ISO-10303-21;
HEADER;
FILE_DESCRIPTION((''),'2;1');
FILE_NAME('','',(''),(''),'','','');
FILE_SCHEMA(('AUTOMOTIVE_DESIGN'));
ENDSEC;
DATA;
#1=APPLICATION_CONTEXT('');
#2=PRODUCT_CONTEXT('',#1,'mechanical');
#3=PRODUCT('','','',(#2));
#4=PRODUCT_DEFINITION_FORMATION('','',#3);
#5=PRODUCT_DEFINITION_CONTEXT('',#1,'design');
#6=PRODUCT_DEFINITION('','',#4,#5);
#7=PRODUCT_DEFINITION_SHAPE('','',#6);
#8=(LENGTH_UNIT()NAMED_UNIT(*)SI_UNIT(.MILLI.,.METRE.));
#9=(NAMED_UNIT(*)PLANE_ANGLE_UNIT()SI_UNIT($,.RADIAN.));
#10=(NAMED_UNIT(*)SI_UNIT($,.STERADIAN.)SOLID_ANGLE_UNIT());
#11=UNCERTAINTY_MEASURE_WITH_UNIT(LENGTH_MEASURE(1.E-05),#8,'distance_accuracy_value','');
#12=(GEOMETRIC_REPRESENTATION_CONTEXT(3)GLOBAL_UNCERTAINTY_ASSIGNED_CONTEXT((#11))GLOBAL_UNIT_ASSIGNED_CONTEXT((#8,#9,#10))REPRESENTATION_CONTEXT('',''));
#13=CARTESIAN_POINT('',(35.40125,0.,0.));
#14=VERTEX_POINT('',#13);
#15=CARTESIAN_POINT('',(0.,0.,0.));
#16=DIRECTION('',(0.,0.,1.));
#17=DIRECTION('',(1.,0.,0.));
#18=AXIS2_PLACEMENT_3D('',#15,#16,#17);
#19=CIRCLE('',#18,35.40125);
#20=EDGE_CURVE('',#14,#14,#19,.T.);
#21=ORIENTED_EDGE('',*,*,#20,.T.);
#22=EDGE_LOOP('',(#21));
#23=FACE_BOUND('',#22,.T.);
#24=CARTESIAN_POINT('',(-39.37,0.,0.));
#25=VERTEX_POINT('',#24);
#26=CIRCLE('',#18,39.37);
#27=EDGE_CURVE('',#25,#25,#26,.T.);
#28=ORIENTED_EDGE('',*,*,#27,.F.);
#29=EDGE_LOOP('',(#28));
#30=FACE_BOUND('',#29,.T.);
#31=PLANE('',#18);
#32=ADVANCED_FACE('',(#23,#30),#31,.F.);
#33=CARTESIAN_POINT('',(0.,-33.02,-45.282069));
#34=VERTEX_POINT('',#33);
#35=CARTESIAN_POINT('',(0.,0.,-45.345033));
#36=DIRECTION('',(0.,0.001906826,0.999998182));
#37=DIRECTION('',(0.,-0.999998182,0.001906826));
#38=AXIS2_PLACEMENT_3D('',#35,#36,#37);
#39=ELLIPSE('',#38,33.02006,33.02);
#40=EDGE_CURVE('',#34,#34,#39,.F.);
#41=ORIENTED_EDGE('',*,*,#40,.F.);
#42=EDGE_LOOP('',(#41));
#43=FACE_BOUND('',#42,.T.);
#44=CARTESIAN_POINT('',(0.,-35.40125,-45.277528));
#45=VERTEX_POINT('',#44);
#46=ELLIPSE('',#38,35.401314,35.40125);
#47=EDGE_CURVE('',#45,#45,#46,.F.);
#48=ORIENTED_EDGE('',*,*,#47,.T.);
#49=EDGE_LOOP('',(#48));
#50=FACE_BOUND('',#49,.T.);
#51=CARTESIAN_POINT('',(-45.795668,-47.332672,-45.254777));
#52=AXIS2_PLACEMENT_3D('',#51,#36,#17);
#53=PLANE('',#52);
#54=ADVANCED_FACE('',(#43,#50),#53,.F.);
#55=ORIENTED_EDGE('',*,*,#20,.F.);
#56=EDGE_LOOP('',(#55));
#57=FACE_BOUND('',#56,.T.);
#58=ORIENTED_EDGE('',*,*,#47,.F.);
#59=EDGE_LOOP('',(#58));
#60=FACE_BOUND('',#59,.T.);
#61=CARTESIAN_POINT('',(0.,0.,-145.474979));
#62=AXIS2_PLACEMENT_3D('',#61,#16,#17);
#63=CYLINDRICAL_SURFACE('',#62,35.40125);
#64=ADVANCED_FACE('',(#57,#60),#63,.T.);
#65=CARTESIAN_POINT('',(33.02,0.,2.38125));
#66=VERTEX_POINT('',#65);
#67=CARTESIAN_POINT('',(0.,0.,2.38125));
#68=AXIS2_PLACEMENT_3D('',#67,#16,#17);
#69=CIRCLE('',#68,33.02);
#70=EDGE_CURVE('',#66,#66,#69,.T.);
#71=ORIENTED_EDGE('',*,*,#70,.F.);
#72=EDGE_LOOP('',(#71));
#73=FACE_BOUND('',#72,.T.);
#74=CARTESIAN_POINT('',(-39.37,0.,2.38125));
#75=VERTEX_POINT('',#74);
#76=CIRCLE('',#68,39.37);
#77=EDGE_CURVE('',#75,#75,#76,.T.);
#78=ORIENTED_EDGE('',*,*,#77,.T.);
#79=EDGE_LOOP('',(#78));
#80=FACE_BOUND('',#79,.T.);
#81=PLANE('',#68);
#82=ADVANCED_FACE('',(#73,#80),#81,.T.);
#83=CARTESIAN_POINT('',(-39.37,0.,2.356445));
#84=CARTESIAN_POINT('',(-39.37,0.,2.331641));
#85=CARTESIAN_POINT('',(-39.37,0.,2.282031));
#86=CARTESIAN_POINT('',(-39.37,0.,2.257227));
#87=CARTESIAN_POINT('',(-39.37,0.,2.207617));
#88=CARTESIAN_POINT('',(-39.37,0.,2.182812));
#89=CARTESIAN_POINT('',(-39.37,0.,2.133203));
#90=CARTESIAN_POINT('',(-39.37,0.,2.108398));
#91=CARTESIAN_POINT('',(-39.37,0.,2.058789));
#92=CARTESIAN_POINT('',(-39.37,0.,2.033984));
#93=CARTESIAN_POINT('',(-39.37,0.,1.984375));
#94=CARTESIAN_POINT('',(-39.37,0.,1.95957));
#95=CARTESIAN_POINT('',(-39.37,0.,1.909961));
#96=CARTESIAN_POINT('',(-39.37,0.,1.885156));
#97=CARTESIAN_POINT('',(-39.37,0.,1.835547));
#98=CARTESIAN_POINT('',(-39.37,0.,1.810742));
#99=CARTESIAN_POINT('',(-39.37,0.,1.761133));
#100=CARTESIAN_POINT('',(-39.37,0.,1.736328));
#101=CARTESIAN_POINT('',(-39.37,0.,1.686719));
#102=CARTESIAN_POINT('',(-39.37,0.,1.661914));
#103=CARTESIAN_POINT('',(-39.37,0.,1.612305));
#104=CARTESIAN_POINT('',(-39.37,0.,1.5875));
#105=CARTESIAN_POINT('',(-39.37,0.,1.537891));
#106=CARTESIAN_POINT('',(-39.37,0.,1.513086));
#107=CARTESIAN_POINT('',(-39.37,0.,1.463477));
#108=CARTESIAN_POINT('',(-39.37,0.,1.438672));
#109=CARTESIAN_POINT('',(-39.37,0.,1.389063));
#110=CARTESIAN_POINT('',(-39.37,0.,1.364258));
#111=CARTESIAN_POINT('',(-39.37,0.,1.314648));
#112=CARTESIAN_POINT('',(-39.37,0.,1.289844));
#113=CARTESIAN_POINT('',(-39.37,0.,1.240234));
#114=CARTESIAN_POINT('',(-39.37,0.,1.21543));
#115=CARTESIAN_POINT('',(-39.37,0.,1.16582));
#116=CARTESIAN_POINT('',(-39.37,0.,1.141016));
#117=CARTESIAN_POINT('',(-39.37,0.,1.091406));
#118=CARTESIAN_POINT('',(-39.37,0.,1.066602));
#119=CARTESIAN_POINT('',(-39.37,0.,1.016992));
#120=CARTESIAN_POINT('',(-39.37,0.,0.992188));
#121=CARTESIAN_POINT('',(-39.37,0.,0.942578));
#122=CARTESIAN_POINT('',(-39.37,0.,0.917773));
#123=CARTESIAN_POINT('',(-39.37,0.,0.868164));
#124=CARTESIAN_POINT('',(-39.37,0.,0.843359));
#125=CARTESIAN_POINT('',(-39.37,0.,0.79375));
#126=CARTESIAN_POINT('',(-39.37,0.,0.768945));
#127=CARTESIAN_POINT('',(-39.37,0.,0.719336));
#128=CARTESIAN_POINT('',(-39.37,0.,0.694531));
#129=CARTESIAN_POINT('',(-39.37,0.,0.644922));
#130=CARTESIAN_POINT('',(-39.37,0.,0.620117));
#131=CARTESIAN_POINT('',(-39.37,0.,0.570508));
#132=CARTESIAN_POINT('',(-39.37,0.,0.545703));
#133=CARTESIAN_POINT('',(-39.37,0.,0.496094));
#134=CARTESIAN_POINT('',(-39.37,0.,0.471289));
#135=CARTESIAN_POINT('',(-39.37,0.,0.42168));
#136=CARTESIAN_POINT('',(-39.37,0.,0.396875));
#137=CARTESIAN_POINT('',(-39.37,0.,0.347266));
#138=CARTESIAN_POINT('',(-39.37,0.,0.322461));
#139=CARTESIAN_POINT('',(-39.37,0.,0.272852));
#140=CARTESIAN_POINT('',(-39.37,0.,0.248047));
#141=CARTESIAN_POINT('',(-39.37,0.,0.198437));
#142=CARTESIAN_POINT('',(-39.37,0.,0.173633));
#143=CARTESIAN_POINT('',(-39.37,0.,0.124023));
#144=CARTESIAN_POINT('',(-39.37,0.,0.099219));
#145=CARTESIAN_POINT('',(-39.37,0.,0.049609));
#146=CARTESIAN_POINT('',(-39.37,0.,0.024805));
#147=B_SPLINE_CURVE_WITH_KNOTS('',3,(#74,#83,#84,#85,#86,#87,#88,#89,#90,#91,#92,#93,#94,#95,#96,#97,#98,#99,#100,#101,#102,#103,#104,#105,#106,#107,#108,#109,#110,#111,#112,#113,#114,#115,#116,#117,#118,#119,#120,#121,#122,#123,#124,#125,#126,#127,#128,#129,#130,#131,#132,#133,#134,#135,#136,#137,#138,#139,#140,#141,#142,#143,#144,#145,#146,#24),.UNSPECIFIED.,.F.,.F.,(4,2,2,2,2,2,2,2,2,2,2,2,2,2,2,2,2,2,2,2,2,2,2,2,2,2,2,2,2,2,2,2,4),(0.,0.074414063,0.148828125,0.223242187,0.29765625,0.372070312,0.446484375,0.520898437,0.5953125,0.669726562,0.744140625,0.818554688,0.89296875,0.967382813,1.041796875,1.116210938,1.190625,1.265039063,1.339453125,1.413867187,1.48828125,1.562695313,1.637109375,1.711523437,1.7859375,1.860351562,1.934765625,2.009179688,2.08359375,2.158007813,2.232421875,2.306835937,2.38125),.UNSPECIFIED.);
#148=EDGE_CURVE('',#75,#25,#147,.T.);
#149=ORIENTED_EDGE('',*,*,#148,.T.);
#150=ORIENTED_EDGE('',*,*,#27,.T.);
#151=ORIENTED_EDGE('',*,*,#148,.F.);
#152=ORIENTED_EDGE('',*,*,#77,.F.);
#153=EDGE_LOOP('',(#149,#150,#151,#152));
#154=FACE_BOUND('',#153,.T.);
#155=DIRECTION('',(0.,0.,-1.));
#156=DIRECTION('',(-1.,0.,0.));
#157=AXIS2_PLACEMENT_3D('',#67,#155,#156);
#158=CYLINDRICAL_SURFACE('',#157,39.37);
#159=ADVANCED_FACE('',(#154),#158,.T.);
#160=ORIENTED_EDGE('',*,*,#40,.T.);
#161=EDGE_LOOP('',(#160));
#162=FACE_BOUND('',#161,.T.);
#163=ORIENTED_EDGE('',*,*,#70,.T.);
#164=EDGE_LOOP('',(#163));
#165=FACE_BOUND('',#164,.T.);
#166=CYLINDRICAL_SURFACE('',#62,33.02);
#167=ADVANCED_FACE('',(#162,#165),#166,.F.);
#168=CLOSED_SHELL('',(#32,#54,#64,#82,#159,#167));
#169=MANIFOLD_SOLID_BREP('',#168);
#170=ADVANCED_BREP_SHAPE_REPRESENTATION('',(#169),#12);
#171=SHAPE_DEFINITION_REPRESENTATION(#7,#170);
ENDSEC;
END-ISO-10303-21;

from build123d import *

# Parameters (mm, degrees)
EXTRUDE1_START       = -45.41253676
EXTRUDE1_OUTLINE_R   = 35.40125
EXTRUDE1_OUTLINE_R_2 = 33.02
EXTRUDE1_DEPTH       = 45.41253676
EXTRUDE1_START_2     = -46
EXTRUDE1_2_OUTLINE_W = 74
EXTRUDE1_2_OUTLINE_H = 74
EXTRUDE1_2_DEPTH     = 0.655049908
SKETCH2_R            = 39.37
SKETCH2_R_2          = 33.02
EXTRUDE2_DEPTH       = 2.38125


with BuildPart() as part:
    # Extrude1: read off the stored shape, not the designer's step
    # Extrude1 outline → Extrude1 (new body)
    with BuildSketch(Plane.XY.offset(EXTRUDE1_START)):
        Circle(EXTRUDE1_OUTLINE_R)
        Circle(EXTRUDE1_OUTLINE_R_2, mode=Mode.SUBTRACT)
    extrude(amount=EXTRUDE1_DEPTH)

    # Extrude1 2 outline → Extrude1 2 (cut)
    with BuildSketch(Plane(origin=(0, 0, 0), x_dir=(1, 0, 0), z_dir=(0, 0.0019068255537502605, 0.9999981820065013)).offset(EXTRUDE1_START_2)):
        Rectangle(EXTRUDE1_2_OUTLINE_W, EXTRUDE1_2_OUTLINE_H)
    extrude(amount=EXTRUDE1_2_DEPTH, mode=Mode.SUBTRACT)

    # Sketch2 → Extrude2 (add)
    with BuildSketch(Plane.XY):
        with Locations(Location((0, 0, 0), (0, 0, 180))):
            Circle(SKETCH2_R)
        Circle(SKETCH2_R_2, mode=Mode.SUBTRACT)
    extrude(amount=EXTRUDE2_DEPTH)


solid = part.part
